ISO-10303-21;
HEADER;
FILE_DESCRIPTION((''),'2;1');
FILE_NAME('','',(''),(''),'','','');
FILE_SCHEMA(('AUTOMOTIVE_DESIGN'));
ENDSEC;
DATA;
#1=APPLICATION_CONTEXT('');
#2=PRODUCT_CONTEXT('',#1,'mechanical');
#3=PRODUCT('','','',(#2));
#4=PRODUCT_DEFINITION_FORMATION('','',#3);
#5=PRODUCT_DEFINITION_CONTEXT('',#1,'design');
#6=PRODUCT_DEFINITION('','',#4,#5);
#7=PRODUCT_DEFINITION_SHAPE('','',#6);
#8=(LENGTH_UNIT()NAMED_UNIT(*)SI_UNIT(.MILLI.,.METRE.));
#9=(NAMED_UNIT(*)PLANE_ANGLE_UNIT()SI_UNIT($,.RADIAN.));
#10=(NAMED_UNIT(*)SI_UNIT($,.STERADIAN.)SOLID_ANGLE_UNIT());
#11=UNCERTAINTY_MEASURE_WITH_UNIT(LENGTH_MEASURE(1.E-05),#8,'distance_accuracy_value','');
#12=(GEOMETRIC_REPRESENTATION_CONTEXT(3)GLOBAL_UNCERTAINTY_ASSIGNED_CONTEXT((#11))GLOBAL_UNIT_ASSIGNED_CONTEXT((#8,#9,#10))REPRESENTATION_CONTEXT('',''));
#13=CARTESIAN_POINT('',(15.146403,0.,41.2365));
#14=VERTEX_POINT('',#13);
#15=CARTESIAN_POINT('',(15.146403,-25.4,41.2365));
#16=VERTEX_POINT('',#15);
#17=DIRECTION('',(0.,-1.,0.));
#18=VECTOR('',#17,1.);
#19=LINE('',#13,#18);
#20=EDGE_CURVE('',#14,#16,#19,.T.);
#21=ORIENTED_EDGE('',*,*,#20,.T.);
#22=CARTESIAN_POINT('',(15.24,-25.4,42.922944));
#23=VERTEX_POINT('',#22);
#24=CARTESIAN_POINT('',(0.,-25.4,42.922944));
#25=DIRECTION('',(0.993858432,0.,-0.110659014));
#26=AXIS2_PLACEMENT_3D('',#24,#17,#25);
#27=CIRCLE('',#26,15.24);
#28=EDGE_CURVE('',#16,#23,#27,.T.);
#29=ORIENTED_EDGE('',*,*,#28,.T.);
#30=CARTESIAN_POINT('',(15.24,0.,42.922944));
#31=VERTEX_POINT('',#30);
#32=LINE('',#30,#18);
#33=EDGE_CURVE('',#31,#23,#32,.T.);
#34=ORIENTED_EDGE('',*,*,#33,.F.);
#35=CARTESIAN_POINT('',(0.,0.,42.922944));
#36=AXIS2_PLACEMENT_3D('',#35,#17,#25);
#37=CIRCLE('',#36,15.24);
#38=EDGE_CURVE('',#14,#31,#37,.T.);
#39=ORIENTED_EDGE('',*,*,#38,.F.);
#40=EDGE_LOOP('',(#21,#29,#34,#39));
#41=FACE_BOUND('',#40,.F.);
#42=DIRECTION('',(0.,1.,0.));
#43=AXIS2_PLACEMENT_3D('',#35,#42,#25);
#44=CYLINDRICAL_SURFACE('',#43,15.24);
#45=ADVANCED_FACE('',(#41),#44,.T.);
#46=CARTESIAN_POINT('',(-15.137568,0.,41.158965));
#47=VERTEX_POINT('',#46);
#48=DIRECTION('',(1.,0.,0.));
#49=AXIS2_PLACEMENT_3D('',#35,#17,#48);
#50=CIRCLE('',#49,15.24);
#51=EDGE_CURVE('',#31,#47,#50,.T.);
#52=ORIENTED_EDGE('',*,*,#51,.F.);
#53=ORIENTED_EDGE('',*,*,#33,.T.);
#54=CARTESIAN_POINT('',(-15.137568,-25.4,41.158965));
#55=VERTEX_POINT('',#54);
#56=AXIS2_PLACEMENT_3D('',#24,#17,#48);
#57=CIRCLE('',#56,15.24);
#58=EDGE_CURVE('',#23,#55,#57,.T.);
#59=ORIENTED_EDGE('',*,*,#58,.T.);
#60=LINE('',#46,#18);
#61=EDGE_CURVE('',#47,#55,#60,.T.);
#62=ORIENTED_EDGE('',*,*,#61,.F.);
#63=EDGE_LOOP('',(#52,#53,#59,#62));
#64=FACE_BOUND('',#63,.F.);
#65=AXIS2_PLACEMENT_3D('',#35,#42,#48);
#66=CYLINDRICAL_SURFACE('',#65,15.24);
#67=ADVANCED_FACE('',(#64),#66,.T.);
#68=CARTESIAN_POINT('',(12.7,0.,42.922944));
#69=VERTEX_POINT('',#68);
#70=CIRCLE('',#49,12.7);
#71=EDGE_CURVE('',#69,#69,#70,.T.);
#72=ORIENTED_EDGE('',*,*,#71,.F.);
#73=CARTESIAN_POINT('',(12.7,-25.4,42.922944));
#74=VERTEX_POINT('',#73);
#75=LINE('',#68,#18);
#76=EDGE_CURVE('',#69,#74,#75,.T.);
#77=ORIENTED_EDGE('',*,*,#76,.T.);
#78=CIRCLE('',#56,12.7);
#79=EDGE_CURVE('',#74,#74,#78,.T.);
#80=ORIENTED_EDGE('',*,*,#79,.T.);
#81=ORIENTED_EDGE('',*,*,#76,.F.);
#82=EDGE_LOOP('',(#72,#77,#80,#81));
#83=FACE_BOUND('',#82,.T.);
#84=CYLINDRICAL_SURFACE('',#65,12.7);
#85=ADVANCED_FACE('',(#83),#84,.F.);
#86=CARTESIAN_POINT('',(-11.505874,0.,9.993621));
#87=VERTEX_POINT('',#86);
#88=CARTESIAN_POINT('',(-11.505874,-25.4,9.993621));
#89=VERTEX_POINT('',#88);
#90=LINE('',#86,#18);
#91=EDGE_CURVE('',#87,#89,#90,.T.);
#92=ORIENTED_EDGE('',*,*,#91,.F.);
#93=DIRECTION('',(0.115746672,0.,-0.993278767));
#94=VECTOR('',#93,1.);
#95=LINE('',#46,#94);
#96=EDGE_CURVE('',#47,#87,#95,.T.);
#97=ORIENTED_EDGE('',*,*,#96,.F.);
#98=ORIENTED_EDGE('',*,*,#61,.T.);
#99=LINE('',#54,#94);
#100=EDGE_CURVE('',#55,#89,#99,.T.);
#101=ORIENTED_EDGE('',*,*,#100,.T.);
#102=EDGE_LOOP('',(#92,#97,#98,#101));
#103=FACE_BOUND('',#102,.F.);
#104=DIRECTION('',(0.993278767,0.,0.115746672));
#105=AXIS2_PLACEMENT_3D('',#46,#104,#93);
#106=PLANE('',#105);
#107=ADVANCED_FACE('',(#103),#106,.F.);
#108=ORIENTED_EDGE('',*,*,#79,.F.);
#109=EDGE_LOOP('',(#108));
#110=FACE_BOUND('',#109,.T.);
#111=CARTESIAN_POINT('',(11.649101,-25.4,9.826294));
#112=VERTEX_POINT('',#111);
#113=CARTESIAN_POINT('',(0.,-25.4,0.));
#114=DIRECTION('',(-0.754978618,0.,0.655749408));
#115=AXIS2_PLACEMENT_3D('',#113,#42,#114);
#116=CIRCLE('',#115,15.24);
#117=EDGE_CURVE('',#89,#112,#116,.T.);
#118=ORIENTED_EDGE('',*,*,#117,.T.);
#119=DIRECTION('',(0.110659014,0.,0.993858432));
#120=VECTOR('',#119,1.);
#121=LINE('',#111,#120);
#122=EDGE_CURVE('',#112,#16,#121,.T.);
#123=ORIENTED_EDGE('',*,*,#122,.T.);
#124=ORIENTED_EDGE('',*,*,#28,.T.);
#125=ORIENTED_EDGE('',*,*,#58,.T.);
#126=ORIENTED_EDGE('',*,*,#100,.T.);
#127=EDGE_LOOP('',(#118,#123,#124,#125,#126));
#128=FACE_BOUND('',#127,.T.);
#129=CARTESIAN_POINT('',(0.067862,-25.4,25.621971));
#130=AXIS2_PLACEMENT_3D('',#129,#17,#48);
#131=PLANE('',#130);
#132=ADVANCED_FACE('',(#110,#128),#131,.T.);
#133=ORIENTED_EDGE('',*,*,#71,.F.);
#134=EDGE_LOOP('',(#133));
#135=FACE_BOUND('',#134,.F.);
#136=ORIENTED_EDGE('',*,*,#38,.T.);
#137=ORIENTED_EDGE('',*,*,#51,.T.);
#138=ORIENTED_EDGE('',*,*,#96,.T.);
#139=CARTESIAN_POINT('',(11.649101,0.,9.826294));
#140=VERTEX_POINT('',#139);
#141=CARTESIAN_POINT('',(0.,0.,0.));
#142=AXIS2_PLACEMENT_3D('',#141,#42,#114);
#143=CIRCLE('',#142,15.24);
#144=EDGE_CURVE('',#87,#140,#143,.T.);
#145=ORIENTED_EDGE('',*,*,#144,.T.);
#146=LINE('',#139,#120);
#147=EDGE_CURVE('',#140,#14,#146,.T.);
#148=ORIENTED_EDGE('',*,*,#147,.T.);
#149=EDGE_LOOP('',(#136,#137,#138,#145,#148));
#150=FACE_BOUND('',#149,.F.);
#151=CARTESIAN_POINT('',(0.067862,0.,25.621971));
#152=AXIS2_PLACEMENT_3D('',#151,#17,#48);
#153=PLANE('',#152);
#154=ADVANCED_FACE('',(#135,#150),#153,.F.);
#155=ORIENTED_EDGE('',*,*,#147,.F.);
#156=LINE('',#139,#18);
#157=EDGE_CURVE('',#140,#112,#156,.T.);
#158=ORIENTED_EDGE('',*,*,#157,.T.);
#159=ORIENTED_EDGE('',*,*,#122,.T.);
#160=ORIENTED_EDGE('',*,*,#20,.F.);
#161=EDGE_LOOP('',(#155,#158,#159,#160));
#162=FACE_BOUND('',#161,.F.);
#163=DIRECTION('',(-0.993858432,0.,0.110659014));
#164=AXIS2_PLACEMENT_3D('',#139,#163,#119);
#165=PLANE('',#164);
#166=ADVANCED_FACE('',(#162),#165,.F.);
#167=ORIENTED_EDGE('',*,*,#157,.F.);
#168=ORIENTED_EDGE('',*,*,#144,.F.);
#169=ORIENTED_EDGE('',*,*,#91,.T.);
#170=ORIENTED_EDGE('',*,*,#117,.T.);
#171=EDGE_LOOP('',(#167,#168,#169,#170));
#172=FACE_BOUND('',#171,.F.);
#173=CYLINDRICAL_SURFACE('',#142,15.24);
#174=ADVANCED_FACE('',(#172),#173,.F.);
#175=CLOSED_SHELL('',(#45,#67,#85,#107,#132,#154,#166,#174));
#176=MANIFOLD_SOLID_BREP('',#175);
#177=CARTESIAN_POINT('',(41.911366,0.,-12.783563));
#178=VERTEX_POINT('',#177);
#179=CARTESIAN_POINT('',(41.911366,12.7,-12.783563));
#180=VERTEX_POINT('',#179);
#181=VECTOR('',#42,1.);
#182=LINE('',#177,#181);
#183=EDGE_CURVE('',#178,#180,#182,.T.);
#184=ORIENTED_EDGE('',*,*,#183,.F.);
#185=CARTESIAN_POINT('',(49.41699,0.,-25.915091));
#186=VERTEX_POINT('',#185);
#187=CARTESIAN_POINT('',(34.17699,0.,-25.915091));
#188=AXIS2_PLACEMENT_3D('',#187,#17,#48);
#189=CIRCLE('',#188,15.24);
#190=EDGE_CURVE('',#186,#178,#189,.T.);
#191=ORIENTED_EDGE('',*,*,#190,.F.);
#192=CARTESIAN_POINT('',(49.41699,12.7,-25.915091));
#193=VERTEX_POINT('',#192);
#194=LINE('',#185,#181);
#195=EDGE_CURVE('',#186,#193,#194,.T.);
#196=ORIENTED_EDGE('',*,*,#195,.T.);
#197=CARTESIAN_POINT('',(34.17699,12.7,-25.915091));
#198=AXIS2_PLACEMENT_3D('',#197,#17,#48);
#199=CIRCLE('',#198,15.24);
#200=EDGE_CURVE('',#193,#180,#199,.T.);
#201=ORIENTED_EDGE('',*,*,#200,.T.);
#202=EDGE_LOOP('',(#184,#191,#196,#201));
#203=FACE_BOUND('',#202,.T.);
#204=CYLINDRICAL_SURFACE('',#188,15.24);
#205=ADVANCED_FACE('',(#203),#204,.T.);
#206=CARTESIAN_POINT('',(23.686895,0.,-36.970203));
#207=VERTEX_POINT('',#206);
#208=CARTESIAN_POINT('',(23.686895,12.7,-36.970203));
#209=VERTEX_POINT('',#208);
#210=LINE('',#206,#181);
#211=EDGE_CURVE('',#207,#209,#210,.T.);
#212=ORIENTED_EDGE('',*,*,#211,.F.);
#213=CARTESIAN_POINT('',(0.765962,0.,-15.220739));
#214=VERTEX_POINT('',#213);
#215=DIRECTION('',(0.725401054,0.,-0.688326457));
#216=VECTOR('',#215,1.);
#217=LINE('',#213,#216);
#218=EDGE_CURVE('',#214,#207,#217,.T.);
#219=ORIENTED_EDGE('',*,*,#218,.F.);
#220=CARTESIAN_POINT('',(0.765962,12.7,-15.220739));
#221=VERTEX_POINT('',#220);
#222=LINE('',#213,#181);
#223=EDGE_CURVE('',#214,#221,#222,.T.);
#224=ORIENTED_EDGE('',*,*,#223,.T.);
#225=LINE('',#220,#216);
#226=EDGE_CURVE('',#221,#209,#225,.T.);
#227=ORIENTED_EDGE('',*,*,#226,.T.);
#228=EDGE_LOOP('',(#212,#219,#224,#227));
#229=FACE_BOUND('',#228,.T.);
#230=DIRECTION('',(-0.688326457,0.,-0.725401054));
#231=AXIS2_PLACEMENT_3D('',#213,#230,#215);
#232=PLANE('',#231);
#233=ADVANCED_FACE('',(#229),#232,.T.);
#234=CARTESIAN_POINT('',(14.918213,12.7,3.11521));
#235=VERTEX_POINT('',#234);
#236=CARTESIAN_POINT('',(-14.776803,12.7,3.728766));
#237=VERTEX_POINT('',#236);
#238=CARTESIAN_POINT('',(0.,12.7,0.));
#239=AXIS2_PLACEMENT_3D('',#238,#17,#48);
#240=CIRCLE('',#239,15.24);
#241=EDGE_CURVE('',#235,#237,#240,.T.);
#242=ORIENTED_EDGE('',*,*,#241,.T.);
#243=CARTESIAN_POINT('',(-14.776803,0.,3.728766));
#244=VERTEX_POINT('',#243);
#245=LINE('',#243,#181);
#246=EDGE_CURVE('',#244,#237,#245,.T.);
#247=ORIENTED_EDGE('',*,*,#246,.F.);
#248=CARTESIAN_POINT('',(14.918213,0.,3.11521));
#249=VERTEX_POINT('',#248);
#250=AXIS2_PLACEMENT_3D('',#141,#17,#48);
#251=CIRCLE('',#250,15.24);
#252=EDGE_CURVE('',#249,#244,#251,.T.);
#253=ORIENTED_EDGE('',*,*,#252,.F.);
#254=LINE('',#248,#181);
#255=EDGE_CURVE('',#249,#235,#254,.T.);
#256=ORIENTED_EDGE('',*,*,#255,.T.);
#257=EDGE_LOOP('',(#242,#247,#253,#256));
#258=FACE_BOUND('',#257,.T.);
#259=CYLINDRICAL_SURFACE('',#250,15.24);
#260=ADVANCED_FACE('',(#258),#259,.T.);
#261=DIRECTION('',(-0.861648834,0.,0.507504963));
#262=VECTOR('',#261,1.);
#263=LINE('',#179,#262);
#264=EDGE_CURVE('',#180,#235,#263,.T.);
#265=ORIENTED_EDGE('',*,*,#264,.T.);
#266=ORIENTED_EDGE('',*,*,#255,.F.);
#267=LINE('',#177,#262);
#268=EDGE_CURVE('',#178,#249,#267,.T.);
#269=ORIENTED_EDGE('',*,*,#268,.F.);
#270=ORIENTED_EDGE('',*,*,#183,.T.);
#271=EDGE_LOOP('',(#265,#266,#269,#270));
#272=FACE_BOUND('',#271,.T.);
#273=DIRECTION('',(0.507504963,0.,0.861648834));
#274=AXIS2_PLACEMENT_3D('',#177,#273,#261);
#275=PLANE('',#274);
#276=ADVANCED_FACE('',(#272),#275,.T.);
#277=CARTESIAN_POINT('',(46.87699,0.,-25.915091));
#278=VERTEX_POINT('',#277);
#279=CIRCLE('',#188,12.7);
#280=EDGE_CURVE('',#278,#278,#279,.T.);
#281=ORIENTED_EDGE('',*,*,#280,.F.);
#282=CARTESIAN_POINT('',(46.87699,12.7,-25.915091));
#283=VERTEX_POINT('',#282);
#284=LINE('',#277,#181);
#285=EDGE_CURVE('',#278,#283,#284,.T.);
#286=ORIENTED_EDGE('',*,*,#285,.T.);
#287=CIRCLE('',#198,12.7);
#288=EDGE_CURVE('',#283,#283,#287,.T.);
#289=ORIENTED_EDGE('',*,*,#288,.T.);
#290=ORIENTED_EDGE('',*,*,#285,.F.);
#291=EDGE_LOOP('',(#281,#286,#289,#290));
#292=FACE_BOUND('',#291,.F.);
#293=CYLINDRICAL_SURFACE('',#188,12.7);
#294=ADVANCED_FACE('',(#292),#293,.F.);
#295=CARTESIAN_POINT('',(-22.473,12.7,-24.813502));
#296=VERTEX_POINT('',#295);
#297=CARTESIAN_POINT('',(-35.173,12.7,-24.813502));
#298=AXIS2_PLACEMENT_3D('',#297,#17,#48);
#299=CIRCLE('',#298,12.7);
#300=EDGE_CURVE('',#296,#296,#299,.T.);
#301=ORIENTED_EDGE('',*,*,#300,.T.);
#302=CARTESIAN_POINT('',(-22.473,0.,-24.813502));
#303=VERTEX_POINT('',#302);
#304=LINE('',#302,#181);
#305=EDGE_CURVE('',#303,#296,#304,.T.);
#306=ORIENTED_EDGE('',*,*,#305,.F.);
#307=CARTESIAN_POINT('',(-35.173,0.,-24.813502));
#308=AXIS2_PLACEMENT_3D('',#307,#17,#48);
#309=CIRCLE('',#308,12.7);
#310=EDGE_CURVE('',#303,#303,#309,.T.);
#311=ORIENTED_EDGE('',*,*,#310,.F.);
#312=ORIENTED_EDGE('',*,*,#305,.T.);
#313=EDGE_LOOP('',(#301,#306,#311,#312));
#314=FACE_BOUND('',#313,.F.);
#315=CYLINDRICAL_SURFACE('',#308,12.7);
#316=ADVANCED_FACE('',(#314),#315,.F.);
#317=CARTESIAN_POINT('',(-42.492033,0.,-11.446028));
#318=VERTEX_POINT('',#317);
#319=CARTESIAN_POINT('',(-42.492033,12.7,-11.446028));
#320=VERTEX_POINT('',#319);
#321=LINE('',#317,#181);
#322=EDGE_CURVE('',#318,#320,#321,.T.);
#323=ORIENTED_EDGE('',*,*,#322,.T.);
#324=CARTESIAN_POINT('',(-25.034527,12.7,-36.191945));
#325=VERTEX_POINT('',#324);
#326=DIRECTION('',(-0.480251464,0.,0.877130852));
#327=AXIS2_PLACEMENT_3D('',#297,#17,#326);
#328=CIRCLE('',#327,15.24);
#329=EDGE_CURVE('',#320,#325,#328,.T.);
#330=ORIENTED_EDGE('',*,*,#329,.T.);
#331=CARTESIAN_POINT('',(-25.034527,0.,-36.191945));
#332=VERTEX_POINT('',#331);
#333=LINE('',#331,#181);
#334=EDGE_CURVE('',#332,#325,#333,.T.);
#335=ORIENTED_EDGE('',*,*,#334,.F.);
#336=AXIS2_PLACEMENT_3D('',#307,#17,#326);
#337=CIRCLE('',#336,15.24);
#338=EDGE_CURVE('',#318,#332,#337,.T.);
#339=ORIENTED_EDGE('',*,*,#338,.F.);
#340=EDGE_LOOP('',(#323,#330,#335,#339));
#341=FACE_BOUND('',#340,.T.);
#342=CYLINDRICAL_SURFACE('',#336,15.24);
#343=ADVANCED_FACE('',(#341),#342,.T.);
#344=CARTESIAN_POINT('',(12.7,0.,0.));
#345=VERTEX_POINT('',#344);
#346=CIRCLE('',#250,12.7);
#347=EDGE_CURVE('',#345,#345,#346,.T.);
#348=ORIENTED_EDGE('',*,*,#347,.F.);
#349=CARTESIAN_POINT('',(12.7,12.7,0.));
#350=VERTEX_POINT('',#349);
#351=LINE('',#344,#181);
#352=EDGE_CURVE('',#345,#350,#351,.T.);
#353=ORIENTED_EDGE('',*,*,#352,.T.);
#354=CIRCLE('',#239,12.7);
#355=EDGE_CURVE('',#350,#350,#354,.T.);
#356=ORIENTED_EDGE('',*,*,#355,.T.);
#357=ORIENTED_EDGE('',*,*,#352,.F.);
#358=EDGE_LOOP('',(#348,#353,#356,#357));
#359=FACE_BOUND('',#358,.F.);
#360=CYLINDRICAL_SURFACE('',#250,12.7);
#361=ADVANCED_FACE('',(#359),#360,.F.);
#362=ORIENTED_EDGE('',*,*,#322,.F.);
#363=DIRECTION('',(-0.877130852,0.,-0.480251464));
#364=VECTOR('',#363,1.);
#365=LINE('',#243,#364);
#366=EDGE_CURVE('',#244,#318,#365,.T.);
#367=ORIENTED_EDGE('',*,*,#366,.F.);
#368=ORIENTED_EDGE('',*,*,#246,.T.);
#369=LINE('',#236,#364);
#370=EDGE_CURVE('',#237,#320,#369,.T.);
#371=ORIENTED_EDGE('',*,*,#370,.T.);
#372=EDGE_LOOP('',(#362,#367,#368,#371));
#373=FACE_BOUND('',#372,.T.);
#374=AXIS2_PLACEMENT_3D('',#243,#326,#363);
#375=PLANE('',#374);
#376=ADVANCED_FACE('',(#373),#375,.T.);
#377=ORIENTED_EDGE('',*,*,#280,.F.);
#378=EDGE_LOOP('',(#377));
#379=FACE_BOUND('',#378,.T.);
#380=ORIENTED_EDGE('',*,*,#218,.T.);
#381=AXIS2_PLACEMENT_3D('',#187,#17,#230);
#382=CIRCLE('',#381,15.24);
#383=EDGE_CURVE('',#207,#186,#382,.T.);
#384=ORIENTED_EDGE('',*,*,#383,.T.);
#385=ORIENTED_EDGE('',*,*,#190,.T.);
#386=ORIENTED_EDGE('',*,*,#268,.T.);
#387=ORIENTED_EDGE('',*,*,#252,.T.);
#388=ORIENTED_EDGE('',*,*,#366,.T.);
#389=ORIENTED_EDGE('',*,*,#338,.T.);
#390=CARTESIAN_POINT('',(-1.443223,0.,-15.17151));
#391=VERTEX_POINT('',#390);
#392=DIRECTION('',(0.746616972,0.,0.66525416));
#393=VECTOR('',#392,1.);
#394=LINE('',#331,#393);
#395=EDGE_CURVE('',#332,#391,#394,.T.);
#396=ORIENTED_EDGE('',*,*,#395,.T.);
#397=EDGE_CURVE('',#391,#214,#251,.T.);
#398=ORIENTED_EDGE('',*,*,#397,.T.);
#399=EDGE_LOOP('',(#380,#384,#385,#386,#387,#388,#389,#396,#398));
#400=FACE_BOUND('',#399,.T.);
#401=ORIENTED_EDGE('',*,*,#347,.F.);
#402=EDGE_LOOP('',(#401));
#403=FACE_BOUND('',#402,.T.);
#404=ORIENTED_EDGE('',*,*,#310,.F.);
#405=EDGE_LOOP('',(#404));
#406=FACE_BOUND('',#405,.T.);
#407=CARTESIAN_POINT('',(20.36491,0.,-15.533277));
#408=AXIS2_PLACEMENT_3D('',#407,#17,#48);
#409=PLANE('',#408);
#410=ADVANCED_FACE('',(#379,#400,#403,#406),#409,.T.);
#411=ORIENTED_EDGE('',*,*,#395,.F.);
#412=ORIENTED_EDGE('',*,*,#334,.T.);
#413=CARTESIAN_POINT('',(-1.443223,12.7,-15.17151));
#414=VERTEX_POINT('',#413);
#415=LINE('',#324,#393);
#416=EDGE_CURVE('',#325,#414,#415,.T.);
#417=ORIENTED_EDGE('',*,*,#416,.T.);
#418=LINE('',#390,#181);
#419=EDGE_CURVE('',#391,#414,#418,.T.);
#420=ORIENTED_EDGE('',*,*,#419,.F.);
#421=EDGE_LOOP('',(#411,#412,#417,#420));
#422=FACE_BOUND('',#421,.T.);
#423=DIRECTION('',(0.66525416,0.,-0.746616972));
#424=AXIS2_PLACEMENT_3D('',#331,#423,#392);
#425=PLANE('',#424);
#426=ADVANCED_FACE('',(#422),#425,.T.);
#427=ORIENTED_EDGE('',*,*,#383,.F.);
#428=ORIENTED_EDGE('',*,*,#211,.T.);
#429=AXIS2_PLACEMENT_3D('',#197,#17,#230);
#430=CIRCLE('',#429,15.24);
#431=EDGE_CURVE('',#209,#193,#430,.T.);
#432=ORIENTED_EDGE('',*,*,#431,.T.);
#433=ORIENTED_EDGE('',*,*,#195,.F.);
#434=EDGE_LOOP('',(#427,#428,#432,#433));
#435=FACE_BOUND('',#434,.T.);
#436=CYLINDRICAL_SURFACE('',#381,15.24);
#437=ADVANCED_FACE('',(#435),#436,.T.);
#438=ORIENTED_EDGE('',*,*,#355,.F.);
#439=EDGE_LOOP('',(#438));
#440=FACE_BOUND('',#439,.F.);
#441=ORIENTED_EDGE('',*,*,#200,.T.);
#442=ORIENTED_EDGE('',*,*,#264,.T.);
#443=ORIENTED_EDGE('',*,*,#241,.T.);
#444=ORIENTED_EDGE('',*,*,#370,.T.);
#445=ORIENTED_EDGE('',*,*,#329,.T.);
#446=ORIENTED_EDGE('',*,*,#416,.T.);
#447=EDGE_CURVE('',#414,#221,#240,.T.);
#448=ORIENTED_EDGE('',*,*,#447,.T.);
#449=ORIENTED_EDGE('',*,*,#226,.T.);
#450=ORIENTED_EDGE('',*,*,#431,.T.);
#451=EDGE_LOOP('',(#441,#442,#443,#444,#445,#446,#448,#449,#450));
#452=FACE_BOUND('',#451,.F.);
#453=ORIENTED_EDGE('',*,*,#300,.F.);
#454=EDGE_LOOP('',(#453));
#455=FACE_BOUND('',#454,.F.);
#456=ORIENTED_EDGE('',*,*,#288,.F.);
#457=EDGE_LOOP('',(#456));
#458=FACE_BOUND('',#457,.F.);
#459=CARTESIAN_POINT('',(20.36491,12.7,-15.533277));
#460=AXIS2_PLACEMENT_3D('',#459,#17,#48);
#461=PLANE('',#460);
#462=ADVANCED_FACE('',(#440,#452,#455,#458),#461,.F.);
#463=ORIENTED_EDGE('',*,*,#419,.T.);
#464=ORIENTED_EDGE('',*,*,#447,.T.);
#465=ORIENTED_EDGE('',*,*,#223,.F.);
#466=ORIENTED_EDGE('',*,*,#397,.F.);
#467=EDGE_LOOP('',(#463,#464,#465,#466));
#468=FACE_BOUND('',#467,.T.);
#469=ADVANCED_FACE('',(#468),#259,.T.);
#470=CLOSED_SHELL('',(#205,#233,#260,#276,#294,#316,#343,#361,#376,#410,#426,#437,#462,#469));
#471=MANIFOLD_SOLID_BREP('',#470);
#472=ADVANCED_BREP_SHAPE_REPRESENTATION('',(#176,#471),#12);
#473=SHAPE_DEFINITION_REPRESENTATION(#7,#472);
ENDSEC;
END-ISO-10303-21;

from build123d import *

# Parameters (mm, degrees)
F0_R     = 15.24
F0_R_2   = 12.7
F1_DEPTH = 12.7
F2_R     = 12.7
F3_DEPTH = 25.4
F4_R     = 12.7
F5_DEPTH = 12.7


with BuildPart() as f1:
    # F0 (on Front) → F1 (new body)
    with BuildSketch(Plane.XZ):
        Circle(F0_R)
        Circle(F0_R_2, mode=Mode.SUBTRACT)
    extrude(amount=-F1_DEPTH)

    # F4 (on Front) → F5 (join)
    with BuildSketch(Plane.XZ):
        with BuildLine():
            ThreePointArc((-1.4432226111, -15.1715097632), (-12.4530081547, -8.7852255463), (-14.7768029338, 3.7287658889))
            Line((-14.7768029338, 3.7287658889), (-42.4920327472, -11.4460277555))
            ThreePointArc((-42.4920327472, -11.4460277555), (-27.4039738732, -11.7024445415), (-19.9330004429, -24.813501942))
            ThreePointArc((-19.9330004429, -24.813501942), (-21.266744036, -31.048374254), (-25.0345270501, -36.1919445975))
            Line((-25.0345270501, -36.1919445975), (-1.4432226111, -15.1715097632))
        make_face()
        with BuildLine():
            ThreePointArc((-19.9330004429, -24.813501942), (-27.4039738732, -11.7024445415), (-42.4920327472, -11.4460277555))
            ThreePointArc((-42.4920327472, -11.4460277555), (-47.6260085976, -33.5987274883), (-25.0345270501, -36.1919445975))
            ThreePointArc((-25.0345270501, -36.1919445975), (-21.266744036, -31.048374254), (-19.9330004429, -24.813501942))
        make_face()
        with Locations((-35.1730004429, -24.813501942)):
            Circle(F4_R, mode=Mode.SUBTRACT)
        with BuildLine():
            ThreePointArc((23.6868947427, -36.9702032486), (22.005429254, -16.7439020463), (41.9113655759, -12.7835629617))
            Line((41.9113655759, -12.7835629617), (14.9182126054, 3.11520989))
            ThreePointArc((14.9182126054, 3.11520989), (15.1593396971, 1.5658926996), (15.24, 0))
            ThreePointArc((15.24, 0), (11.0437961568, -10.5020077341), (0.7659624086, -15.2207391932))
            Line((0.7659624086, -15.2207391932), (23.6868947427, -36.9702032486))
        make_face()
        with BuildLine():
            ThreePointArc((23.6868947427, -36.9702032486), (40.1931577089, -39.9173526309), (49.4169899462, -25.9150911903))
            ThreePointArc((49.4169899462, -25.9150911903), (47.4081933041, -18.3524952272), (41.9113655759, -12.7835629617))
            ThreePointArc((41.9113655759, -12.7835629617), (22.005429254, -16.7439020463), (23.6868947427, -36.9702032486))
        make_face()
        with Locations((34.1769899462, -25.9150911903)):
            Circle(F4_R, mode=Mode.SUBTRACT)
    extrude(amount=-F5_DEPTH)


with BuildPart() as f3:
    # F2 (on Front) → F3 (new body)
    with BuildSketch(Plane.XZ):
        with BuildLine():
            ThreePointArc((15.1464025023, 41.2365004611), (0.0390187723, 27.6829937802), (-15.1375684015, 41.1589645532))
            Line((-15.1375684015, 41.1589645532), (-11.5058741435, 9.9936209751))
            ThreePointArc((-11.5058741435, 9.9936209751), (0.1101276854, 15.239602091), (11.649101066, 9.8262935206))
            Line((11.649101066, 9.8262935206), (15.1464025023, 41.2365004611))
        make_face()
        with BuildLine():
            ThreePointArc((15.1464025023, 41.2365004611), (15.2165826343, 42.0784244805), (15.24, 42.9229438305))
            ThreePointArc((15.24, 42.9229438305), (-0.8834753991, 58.13731438), (-15.1375684015, 41.1589645532))
            ThreePointArc((-15.1375684015, 41.1589645532), (0.0390187723, 27.6829937802), (15.1464025023, 41.2365004611))
        make_face()
        with Locations((0, 42.9229438305)):
            Circle(F2_R, mode=Mode.SUBTRACT)
    extrude(amount=F3_DEPTH)


solid = Compound([f1.part, f3.part])
